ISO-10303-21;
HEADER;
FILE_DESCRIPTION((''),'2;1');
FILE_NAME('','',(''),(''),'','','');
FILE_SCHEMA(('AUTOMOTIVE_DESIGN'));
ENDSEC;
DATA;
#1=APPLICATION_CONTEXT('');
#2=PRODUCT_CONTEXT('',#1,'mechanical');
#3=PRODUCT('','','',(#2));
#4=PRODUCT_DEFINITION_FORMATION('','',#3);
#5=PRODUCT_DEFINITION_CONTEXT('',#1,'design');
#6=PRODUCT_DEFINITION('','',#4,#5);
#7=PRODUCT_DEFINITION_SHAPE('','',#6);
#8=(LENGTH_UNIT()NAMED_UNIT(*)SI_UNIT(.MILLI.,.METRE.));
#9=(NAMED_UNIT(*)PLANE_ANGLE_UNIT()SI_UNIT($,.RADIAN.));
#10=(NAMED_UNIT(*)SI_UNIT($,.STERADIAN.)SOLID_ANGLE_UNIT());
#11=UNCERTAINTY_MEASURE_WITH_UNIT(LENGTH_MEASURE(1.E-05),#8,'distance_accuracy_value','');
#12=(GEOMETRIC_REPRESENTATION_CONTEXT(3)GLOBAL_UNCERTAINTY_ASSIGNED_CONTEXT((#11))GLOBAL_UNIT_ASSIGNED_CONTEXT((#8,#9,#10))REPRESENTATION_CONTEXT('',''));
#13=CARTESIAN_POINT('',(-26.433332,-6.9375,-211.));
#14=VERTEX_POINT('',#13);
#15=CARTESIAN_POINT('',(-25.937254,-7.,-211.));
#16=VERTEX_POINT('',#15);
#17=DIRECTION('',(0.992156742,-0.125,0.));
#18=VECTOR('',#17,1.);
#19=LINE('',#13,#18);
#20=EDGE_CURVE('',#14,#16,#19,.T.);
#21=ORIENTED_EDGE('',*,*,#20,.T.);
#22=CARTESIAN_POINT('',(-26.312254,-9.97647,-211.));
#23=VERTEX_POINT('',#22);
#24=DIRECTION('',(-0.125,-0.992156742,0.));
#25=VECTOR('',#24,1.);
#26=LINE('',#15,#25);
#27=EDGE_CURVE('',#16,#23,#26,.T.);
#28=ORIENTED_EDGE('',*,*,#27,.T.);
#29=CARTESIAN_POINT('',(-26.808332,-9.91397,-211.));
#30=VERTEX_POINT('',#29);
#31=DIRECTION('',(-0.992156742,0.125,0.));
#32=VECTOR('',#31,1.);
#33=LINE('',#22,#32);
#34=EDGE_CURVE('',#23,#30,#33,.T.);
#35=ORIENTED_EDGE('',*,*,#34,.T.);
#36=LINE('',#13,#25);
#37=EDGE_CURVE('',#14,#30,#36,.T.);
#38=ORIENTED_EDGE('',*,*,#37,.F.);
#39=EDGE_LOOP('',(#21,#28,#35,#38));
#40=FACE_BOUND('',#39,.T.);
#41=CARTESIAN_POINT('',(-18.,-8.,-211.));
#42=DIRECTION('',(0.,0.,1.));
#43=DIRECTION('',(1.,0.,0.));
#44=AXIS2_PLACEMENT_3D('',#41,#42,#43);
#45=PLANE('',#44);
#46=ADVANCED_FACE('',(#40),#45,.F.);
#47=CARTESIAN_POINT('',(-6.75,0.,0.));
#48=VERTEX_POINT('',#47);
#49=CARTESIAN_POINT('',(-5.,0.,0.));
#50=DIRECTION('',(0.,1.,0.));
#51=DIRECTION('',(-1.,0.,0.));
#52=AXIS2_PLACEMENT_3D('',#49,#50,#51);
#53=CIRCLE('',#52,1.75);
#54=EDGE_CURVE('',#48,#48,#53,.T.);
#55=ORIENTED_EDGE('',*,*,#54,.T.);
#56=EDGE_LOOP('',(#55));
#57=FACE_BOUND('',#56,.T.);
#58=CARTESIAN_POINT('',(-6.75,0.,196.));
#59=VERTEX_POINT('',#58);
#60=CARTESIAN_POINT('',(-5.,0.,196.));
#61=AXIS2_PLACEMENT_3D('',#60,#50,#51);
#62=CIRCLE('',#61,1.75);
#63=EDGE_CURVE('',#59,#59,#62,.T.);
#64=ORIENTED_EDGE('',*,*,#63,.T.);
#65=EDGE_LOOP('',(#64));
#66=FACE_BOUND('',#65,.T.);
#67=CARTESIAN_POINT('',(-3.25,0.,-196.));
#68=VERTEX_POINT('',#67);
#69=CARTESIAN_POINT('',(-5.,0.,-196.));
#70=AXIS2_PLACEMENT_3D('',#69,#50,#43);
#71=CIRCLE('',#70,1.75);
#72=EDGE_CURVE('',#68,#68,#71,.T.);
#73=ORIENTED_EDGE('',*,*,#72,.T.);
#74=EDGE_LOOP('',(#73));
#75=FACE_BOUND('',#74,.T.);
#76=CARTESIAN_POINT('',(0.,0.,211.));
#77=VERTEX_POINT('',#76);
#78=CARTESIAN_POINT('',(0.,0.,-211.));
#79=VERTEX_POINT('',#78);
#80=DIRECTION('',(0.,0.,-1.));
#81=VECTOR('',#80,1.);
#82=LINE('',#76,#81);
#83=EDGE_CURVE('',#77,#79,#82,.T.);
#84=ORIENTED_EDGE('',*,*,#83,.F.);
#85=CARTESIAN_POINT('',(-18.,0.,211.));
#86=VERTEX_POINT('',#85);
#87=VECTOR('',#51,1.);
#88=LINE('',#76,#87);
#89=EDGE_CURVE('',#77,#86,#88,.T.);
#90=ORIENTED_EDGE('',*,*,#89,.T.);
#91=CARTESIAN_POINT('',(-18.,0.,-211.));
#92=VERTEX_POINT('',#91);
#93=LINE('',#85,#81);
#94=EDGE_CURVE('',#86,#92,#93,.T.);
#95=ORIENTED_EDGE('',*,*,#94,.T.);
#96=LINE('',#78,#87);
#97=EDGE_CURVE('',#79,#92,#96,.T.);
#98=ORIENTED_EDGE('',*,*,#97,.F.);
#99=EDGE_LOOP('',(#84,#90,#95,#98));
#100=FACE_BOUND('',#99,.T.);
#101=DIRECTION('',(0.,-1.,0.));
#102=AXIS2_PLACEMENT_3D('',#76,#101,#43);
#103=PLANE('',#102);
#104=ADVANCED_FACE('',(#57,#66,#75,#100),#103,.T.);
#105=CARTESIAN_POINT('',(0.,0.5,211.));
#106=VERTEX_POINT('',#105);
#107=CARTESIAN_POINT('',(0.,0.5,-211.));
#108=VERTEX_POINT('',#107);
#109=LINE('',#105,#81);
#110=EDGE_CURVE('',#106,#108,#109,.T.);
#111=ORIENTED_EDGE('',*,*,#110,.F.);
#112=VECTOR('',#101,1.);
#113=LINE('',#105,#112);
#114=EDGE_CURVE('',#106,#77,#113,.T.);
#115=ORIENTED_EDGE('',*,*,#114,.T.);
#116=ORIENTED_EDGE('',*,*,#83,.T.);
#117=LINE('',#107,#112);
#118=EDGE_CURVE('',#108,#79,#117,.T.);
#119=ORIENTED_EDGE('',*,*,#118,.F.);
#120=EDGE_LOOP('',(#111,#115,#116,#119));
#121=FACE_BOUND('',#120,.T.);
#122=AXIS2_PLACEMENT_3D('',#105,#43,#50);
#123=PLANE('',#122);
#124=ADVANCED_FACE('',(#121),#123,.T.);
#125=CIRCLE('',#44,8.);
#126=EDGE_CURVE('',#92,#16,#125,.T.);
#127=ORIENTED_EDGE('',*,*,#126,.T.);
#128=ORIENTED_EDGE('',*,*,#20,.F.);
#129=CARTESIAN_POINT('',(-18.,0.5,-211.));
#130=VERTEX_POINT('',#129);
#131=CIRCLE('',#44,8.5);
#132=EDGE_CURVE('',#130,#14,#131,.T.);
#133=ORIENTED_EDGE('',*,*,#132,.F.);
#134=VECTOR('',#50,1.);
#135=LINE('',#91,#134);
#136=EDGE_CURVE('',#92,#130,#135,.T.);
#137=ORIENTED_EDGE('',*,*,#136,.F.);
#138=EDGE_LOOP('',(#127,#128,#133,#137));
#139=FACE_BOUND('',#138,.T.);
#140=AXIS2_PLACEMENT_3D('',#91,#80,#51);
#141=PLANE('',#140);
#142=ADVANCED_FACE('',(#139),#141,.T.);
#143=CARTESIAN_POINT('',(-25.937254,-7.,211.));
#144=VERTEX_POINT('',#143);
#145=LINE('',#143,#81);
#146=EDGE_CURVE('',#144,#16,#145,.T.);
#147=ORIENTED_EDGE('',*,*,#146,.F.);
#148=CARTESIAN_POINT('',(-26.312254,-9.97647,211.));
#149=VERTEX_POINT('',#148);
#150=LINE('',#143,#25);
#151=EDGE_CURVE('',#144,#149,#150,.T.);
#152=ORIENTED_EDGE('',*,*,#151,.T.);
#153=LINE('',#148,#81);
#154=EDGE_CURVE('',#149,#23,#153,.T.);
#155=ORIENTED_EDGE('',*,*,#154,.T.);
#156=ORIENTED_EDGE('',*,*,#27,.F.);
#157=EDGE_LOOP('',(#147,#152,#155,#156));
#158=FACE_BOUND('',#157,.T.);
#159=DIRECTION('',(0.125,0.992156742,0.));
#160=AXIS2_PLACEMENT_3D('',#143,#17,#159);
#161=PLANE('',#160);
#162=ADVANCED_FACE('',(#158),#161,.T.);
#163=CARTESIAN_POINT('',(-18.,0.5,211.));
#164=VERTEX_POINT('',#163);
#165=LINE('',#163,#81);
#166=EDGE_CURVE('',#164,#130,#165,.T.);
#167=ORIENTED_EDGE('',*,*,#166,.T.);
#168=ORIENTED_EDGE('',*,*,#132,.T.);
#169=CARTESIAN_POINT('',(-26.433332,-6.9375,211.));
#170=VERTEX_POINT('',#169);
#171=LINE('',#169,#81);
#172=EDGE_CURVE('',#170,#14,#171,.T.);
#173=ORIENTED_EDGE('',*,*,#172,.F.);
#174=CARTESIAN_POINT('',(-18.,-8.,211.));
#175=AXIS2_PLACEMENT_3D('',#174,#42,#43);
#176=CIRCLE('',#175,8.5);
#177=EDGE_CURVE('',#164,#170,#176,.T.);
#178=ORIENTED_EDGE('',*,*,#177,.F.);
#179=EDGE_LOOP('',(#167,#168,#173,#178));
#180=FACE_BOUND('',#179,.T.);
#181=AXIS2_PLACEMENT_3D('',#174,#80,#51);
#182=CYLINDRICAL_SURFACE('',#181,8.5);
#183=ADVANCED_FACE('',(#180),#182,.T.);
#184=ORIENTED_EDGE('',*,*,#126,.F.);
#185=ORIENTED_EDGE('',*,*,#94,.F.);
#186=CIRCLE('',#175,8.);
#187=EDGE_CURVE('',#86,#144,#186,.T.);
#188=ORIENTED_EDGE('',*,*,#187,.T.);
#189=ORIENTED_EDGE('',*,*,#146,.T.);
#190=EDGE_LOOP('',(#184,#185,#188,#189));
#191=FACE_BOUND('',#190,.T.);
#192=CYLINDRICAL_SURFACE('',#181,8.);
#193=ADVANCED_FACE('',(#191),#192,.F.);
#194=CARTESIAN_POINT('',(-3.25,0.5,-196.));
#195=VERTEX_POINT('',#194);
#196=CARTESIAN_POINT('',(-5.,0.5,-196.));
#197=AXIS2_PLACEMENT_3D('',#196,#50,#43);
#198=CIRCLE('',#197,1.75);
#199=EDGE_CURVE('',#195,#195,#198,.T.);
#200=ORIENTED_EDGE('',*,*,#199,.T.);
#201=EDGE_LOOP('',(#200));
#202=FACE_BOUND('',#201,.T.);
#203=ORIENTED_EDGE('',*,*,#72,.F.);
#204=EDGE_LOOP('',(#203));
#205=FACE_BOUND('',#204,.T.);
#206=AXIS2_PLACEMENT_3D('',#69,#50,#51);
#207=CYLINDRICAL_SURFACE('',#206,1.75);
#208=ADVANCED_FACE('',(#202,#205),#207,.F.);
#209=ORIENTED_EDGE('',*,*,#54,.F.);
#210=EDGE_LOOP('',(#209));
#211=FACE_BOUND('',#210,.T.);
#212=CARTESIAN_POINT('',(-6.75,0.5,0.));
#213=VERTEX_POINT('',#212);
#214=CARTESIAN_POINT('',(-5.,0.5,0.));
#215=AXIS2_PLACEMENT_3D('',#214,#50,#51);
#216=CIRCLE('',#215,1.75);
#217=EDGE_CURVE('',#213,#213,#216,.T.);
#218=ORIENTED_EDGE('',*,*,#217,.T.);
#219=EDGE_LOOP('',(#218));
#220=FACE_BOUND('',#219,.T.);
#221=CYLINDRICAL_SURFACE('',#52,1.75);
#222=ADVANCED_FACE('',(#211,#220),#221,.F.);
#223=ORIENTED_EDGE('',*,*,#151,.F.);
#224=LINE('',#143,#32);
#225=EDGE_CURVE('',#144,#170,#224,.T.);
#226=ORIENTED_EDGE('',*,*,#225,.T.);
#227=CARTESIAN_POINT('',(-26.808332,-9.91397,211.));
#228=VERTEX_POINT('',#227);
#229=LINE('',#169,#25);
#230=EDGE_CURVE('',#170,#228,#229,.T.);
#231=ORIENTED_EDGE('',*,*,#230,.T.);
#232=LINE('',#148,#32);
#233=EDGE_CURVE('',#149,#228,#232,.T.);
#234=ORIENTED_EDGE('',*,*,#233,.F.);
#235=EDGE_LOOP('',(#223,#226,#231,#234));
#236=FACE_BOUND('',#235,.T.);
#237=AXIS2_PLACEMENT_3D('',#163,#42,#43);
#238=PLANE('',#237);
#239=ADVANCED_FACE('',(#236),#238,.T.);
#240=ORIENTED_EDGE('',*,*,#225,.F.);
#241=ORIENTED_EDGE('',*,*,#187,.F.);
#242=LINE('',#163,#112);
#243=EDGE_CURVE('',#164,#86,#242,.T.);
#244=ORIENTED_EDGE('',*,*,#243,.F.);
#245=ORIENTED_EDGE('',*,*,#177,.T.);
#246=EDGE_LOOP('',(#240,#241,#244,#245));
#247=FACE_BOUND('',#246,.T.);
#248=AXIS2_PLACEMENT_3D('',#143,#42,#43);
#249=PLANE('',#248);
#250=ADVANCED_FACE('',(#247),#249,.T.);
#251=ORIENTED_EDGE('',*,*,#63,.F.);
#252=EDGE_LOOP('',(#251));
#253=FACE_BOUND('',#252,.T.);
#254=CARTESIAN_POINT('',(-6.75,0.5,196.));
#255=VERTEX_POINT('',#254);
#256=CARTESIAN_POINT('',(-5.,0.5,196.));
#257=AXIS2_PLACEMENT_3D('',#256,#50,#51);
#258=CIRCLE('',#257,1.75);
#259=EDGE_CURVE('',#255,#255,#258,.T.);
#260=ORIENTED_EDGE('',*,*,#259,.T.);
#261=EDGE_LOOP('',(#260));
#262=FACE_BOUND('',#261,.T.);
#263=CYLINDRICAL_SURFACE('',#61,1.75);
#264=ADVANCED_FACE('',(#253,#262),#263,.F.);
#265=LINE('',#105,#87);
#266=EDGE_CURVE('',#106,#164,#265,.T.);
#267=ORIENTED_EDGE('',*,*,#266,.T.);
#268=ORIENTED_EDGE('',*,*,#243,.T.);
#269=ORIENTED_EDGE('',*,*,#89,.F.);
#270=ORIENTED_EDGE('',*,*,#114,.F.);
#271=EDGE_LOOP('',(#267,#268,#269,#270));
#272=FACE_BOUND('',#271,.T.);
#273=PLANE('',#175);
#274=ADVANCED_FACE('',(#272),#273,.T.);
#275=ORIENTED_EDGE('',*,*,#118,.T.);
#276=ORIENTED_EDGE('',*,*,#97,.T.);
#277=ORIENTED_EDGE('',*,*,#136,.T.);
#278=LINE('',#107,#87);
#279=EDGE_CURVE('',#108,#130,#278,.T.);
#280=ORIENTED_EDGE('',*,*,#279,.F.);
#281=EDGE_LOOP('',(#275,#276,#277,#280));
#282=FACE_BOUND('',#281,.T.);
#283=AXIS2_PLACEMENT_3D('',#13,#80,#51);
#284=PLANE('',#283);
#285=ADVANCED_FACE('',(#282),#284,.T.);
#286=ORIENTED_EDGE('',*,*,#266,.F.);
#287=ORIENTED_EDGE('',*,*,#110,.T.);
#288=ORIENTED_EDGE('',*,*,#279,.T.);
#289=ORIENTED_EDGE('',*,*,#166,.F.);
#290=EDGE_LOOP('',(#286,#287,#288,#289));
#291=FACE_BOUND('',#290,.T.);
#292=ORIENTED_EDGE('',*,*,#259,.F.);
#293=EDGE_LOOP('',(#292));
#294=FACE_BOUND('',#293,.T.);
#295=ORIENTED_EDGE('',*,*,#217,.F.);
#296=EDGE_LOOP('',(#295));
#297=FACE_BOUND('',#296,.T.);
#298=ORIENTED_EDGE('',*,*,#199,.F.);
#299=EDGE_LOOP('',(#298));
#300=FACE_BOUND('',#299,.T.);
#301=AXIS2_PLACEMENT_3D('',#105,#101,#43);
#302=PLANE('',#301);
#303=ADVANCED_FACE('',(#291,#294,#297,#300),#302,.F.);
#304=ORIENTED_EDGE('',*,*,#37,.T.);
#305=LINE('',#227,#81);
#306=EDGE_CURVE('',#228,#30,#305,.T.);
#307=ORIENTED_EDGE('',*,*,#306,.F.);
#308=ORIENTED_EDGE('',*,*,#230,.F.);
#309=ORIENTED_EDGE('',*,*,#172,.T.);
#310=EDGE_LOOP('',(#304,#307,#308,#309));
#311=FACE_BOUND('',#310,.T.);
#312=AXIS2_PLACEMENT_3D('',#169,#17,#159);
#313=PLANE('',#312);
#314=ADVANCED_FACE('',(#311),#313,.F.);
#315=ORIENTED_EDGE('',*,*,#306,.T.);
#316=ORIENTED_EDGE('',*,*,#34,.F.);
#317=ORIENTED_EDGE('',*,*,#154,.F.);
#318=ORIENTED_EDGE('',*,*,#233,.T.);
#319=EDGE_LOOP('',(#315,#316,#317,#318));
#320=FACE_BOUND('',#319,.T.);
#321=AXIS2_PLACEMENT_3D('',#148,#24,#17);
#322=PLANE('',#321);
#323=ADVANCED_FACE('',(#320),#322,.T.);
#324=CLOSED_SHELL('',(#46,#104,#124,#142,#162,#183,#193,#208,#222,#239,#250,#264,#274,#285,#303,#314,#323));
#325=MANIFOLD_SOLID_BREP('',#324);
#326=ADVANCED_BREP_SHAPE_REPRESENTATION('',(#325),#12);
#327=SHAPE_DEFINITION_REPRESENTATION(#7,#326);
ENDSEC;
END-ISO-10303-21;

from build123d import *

# Parameters (mm, degrees)
BASE_FLANGE1_DEPTH = 211
SKETCH2_R          = 1.75
EXTRUDE1_DEPTH     = 0.5


# Sheet-metal steps are written as plain solids
with BuildPart() as part:
    # Sketch1 → Base-Flange1 (new, symmetric)
    with BuildSketch(Plane.XY):
        with BuildLine():
            Line((0, 0), (-18, 0))
            ThreePointArc((-18, 0), (-23.291502622, -2), (-25.937253933, -7))
            Line((-25.937253933, -7), (-26.312253933, -9.976470225))
            Line((-26.312253933, -9.976470225), (-26.808332304, -9.913970225))
            Line((-26.808332304, -9.913970225), (-26.433332304, -6.9375))
            ThreePointArc((-26.433332304, -6.9375), (-23.622221536, -1.625), (-18, 0.5))
            Line((-18, 0.5), (0, 0.5))
            Line((0, 0.5), (0, 0))
        make_face()
    extrude(amount=BASE_FLANGE1_DEPTH, both=True)

    # Sketch2 → Extrude1 (cut)
    with BuildSketch(Plane(origin=(0, 0.5, 0), x_dir=(1, 0, 0), z_dir=(0, 1, 0))):
        with Locations(Location((-5, -196, 0), (0, 0, 180))):
            Circle(SKETCH2_R)
        with Locations((-5, 196)):
            Circle(SKETCH2_R)
        with Locations(Location((-5, 0, 0), (0, 0, 180))):
            Circle(SKETCH2_R)
    extrude(amount=-EXTRUDE1_DEPTH, mode=Mode.SUBTRACT)


solid = part.part
